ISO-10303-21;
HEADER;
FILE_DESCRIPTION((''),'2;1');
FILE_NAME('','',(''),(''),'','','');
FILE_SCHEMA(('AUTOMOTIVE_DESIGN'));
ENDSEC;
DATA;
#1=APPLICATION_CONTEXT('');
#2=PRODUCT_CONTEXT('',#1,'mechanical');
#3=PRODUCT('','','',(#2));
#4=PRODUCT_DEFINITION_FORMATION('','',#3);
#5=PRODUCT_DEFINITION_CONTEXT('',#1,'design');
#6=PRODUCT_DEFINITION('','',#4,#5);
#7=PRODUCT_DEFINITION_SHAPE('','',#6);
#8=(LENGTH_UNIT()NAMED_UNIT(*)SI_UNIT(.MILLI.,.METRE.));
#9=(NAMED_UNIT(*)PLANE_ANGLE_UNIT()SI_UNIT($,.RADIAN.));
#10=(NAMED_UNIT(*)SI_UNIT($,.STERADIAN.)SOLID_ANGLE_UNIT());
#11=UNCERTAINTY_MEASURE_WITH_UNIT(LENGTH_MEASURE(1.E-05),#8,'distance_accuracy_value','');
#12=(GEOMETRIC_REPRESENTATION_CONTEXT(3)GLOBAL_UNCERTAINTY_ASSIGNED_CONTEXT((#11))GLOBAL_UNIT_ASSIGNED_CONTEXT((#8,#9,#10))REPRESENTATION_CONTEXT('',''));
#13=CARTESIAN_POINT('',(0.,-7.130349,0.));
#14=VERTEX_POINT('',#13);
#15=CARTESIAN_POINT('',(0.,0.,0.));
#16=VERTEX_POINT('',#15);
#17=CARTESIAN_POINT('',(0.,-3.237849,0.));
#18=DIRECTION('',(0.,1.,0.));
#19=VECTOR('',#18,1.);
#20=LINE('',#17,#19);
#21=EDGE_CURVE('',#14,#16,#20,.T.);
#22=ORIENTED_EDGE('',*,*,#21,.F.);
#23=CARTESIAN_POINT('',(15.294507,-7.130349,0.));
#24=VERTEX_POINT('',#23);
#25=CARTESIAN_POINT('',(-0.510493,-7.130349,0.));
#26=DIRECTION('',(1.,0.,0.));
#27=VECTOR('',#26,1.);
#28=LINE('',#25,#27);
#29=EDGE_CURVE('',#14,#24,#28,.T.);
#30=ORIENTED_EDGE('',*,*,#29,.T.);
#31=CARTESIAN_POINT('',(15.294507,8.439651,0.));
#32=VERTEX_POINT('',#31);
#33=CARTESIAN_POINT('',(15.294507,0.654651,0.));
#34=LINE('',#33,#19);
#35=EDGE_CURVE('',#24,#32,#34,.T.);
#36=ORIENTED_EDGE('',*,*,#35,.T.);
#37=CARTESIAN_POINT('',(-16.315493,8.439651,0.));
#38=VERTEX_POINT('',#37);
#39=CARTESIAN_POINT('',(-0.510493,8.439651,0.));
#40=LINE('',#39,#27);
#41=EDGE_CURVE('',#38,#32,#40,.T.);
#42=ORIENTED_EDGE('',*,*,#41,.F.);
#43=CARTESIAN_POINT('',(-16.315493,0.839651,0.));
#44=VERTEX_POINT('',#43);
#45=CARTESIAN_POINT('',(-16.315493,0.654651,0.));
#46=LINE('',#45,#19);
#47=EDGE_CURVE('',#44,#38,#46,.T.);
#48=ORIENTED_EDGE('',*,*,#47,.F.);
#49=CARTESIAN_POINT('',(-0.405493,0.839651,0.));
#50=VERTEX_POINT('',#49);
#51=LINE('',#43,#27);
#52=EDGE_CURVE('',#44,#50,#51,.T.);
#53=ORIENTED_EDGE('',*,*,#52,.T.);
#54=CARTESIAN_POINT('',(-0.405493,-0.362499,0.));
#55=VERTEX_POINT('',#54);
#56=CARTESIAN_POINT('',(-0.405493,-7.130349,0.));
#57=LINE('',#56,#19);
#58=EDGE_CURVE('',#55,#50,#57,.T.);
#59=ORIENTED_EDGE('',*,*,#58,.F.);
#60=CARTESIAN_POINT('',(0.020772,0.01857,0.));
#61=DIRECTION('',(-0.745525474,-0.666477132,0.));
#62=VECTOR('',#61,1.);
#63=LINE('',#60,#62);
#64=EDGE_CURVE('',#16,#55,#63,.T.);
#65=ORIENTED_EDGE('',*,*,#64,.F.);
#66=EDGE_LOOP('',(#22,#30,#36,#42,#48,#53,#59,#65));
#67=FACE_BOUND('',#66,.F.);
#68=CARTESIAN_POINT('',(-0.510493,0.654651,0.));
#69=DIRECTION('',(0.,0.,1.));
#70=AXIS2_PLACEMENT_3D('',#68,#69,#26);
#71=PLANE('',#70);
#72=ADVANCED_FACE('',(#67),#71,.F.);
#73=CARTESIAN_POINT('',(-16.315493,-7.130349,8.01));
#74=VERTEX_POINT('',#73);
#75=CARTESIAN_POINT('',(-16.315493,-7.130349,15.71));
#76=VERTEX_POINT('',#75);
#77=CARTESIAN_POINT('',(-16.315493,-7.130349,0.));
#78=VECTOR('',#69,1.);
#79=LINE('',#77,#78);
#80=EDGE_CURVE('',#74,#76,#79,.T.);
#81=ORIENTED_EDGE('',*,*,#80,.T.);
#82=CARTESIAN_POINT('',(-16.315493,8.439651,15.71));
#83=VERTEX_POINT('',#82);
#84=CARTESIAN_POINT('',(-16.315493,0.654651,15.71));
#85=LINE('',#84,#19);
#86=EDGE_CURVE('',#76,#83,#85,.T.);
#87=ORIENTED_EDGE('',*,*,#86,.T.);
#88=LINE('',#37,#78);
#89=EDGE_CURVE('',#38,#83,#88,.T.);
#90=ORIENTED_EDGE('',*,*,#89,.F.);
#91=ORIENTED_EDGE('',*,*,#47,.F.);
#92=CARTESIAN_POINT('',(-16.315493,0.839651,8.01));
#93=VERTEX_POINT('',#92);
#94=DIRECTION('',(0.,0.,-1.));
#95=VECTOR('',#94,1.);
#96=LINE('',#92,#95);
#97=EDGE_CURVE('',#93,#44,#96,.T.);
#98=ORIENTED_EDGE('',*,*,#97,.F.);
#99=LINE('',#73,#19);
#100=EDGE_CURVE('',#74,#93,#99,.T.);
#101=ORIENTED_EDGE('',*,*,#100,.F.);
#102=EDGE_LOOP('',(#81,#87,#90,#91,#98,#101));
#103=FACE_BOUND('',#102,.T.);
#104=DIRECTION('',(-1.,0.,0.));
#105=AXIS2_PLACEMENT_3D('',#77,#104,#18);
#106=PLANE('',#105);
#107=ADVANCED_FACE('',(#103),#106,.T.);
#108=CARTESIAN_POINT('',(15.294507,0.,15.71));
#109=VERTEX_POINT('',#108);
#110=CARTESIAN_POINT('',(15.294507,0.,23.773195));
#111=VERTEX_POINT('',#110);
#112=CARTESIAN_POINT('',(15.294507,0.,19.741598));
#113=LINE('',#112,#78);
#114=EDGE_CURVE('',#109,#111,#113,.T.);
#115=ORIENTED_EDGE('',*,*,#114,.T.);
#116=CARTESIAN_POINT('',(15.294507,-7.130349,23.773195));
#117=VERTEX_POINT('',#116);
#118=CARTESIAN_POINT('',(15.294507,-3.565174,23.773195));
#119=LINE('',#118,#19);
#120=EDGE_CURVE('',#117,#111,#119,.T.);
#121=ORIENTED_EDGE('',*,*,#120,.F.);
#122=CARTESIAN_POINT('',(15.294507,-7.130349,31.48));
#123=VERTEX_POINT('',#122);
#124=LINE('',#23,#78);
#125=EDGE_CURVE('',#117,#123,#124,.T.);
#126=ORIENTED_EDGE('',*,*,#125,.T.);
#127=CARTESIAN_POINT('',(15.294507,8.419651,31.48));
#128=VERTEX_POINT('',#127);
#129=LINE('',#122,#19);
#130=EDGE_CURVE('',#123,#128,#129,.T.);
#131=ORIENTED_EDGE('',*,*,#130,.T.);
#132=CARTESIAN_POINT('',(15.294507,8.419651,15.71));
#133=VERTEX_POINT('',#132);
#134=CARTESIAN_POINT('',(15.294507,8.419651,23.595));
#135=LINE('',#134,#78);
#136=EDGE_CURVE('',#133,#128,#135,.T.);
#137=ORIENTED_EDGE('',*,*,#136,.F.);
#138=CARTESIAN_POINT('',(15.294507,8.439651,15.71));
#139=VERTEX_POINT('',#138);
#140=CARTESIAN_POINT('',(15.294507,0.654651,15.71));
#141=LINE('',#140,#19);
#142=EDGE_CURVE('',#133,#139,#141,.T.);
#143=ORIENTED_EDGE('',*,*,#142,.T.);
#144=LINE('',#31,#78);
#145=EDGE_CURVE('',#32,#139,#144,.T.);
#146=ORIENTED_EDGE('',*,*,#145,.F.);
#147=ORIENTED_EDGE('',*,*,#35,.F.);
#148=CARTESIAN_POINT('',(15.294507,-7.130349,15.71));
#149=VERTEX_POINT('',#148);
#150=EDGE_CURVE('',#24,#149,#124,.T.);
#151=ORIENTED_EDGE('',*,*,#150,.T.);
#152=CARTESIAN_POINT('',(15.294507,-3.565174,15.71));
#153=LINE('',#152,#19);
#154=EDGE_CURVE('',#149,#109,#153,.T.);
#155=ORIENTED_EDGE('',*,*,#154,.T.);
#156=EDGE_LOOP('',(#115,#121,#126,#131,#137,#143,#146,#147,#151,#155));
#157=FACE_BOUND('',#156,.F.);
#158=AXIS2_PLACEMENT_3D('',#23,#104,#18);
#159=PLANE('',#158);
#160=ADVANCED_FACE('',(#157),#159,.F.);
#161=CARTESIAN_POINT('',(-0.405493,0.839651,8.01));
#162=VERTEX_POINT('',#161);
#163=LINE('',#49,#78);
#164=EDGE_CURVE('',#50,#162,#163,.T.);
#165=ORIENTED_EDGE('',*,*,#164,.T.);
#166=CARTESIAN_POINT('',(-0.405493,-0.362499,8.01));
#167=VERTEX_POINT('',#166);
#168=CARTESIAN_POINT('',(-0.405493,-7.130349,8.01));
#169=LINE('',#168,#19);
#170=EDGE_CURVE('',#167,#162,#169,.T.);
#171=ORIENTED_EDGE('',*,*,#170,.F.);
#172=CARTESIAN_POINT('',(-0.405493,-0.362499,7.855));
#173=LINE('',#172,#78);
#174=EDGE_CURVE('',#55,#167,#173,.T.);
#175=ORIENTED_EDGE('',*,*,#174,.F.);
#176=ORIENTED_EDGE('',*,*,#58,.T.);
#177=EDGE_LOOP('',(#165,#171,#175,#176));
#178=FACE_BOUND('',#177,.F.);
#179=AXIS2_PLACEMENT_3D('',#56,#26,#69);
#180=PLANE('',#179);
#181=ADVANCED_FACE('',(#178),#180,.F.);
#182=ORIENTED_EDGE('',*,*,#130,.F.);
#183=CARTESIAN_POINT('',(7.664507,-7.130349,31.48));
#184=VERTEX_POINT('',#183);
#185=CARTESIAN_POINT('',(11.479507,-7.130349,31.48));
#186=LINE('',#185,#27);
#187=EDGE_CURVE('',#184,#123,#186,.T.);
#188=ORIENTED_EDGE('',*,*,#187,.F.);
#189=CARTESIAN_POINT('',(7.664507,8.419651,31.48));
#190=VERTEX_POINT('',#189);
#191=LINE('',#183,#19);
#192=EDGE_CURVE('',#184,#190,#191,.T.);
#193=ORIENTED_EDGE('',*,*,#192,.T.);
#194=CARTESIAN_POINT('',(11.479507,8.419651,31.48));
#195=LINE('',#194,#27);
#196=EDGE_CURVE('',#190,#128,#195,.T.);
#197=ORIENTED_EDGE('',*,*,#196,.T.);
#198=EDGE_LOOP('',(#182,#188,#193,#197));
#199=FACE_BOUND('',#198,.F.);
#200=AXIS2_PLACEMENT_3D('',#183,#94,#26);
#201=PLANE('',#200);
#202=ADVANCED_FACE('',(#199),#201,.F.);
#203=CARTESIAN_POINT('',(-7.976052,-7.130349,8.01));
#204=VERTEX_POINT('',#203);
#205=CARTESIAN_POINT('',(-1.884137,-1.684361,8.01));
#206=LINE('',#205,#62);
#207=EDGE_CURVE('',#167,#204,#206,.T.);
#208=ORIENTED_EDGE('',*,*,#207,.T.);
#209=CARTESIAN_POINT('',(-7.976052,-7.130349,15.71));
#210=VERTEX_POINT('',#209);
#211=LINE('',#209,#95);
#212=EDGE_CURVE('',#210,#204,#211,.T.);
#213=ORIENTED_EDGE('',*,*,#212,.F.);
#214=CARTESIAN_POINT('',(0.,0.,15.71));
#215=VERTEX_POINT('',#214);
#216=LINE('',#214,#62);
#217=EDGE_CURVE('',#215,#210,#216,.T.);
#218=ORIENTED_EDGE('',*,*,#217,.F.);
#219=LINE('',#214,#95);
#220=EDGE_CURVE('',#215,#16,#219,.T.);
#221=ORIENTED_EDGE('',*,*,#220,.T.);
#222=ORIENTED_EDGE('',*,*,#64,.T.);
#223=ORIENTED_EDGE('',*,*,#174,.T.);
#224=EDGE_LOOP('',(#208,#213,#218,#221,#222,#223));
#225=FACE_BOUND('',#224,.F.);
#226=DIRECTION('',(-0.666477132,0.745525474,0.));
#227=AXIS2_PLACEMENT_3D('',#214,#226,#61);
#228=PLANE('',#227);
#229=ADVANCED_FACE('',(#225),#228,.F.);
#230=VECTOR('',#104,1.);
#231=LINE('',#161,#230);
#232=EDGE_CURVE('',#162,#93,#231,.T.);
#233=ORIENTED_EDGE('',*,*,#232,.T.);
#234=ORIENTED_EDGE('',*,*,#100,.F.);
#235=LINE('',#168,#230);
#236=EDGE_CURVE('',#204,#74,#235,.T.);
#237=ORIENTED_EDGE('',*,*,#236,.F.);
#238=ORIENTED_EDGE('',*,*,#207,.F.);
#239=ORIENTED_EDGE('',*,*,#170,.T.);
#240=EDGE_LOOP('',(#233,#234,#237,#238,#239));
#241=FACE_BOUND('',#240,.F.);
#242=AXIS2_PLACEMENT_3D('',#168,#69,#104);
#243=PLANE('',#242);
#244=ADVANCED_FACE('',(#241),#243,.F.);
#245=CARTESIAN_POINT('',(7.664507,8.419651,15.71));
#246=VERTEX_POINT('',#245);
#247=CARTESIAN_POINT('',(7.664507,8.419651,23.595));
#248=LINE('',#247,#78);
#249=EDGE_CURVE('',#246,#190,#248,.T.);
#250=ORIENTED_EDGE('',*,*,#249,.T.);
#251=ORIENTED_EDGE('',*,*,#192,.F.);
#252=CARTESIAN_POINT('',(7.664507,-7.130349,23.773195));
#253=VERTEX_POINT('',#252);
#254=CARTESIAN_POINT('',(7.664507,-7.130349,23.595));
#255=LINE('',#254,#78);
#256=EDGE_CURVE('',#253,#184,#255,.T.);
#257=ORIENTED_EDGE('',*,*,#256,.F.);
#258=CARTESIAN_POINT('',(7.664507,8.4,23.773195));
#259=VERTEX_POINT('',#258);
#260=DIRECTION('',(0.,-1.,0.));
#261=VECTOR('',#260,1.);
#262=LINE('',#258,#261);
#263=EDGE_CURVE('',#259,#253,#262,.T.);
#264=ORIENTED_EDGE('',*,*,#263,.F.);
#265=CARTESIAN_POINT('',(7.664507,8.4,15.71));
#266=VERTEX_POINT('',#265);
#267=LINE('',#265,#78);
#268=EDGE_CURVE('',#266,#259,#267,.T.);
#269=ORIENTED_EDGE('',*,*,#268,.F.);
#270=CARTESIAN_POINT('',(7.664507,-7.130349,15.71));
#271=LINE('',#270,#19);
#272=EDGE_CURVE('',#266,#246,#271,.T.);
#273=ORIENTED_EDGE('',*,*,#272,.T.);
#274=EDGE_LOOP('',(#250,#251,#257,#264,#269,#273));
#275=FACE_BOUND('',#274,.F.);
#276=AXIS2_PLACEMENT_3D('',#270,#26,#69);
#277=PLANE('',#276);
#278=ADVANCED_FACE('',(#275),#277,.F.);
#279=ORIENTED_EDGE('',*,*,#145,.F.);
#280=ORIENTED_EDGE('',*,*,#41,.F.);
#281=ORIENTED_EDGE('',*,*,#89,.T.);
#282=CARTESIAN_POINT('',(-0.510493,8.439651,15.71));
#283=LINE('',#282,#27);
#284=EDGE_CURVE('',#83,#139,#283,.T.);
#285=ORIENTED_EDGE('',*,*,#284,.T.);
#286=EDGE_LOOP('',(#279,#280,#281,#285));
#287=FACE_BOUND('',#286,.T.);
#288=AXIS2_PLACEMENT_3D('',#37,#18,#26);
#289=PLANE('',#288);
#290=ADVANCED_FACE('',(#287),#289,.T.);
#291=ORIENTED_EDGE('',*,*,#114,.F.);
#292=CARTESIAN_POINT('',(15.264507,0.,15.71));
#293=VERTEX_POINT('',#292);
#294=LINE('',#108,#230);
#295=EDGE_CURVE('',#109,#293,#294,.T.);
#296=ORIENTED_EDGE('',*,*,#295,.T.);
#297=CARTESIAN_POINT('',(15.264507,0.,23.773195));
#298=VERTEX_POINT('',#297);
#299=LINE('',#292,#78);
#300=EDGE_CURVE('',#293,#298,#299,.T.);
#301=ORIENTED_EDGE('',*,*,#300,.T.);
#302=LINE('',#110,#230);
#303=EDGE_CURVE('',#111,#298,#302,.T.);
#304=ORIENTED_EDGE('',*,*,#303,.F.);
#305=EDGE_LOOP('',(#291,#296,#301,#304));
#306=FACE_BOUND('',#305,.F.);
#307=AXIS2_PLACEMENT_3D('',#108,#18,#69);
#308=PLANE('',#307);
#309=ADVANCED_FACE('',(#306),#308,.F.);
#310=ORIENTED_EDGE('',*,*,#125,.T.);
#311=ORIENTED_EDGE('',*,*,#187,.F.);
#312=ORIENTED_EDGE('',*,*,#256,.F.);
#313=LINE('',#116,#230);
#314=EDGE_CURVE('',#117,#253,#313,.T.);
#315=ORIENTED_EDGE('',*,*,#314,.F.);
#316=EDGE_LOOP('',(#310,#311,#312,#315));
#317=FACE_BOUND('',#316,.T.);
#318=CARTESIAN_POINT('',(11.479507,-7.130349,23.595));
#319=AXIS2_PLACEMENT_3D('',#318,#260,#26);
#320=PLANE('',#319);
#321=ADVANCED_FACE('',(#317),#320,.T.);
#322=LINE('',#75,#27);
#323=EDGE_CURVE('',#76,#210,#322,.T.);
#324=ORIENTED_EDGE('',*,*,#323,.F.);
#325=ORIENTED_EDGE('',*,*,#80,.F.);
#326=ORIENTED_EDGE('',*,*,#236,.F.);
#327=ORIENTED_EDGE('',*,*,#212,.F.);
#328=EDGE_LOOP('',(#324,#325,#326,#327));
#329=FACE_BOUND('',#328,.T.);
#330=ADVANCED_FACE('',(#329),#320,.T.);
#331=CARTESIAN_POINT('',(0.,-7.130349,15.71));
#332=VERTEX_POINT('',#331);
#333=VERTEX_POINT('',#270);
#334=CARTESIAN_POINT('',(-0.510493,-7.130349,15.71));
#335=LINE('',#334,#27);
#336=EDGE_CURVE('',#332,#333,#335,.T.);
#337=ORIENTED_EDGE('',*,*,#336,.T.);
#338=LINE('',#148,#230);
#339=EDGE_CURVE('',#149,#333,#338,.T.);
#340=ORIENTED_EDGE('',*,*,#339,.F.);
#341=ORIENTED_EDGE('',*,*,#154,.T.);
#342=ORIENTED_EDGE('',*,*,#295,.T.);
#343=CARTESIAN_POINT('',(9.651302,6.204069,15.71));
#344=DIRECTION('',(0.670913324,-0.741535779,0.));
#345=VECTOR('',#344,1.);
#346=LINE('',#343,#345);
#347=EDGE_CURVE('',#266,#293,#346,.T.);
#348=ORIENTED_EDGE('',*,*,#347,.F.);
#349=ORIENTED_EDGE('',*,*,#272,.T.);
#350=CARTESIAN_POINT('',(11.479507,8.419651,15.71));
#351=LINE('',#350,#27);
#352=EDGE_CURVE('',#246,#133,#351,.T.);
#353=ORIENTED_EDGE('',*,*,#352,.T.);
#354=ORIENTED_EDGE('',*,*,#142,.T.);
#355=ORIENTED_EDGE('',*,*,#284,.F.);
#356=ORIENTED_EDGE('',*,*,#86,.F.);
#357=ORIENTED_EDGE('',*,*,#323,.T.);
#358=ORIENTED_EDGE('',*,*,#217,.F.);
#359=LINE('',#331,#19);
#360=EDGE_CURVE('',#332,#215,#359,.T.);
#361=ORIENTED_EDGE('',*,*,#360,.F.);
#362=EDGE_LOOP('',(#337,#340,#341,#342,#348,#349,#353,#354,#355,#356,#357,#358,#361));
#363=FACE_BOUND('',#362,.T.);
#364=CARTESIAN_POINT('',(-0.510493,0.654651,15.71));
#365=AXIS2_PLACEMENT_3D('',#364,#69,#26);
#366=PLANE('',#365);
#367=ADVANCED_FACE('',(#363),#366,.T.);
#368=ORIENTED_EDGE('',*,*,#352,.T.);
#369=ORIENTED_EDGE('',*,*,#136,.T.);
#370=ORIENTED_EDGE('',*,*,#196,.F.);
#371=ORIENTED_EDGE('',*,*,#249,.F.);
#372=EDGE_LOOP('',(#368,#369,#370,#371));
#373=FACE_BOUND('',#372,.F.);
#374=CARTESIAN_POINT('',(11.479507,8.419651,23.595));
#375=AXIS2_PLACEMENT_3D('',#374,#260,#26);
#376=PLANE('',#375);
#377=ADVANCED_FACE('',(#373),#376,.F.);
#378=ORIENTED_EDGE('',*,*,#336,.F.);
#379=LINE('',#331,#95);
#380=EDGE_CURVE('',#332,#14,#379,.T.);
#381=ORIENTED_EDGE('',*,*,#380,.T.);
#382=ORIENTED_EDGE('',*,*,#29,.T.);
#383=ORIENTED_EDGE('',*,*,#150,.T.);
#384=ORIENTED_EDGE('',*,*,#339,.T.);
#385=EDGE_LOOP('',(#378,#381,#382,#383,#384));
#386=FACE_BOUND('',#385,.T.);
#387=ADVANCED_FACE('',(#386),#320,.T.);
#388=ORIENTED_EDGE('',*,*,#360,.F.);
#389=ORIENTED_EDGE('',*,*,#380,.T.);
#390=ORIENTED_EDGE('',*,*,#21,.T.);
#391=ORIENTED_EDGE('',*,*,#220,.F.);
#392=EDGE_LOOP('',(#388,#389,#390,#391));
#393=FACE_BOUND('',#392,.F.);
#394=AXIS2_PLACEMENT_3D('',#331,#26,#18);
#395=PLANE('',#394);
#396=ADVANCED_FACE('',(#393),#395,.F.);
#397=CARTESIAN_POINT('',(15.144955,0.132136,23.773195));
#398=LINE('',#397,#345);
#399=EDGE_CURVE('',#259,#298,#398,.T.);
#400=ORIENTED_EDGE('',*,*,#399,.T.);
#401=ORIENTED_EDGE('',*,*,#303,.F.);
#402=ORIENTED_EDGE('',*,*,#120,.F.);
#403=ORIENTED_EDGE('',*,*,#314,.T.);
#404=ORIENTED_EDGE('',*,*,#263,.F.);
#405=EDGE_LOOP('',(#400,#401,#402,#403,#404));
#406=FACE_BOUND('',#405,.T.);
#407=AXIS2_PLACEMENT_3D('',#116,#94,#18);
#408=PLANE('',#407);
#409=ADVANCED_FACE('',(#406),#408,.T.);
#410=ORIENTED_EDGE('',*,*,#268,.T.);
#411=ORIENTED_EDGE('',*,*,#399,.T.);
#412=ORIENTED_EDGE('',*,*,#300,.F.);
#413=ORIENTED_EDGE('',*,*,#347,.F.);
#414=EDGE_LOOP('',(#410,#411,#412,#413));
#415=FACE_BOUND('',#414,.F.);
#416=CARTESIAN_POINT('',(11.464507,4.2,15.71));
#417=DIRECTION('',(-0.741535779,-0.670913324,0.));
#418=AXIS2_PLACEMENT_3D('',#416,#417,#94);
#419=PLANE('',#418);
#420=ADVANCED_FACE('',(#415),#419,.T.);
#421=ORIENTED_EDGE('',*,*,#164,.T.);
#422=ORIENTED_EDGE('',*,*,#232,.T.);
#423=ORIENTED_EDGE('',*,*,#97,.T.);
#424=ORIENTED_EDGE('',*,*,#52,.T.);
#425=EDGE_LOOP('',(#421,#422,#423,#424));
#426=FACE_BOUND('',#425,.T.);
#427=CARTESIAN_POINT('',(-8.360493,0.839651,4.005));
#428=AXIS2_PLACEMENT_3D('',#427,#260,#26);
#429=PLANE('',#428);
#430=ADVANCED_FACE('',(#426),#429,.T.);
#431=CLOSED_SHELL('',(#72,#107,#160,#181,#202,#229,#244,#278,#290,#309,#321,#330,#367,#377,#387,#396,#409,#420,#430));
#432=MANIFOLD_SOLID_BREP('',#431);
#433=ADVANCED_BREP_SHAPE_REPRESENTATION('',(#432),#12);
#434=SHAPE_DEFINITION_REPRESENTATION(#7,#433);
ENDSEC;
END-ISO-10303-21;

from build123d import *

# Parameters (mm, degrees)
F0_W      = 31.61
F0_H      = 15.57
F1_DEPTH  = 15.71
F2_W      = 7.63
F2_H      = 15.77
F3_DEPTH  = 15.55
F5_DEPTH  = 7.97
F7_DEPTH  = 25
F8_W      = 7.1303485631
F8_H      = 8.063195222
F9_DEPTH  = 25
F10_SIZE2 = 7.6
F10_SIZE  = 8.4


with BuildPart() as f1:
    # F0 (on Top) → F1 (new body)
    with BuildSketch(Plane.XY):
        with Locations((-0.5104932934, 0.6546514369)):
            Rectangle(F0_W, F0_H)
    extrude(amount=F1_DEPTH)

    # F2 (on face) → F3 (join)
    with BuildSketch(Plane.XZ.offset(7.1303485631)):
        with Locations((11.4795067066, 23.595)):
            Rectangle(F2_W, F2_H)
    extrude(amount=-F3_DEPTH)

    # F4 (on face) → F5 (cut)
    with BuildSketch(Plane.XZ.offset(7.1303485631)):
        Polygon((-0.4054932934, 0), (-0.4054932934, 8.01), (-8.0654932934, 8.01), (-16.3154932934, 8.01), (-16.3154932934, 0), align=None)
    extrude(amount=-F5_DEPTH, mode=Mode.SUBTRACT)

    # F6 (on face) → F7 (cut)
    with BuildSketch(Plane.XY.offset(15.71)):
        Polygon((0, 0), (-7.9760523513, -7.1303485631), (0, -7.1303485631), align=None)
    extrude(amount=-F7_DEPTH, mode=Mode.SUBTRACT)

    # F8 (on face) → F9 (cut)
    with BuildSketch(Plane.YZ.offset(15.2945067066)):
        with Locations((-3.5651742816, 19.741597611)):
            Rectangle(F8_W, F8_H)
    extrude(amount=-F9_DEPTH, mode=Mode.SUBTRACT)

    # F10
    f10_edges = [f1.edges().sort_by_distance(p)[0] for p in [
        (7.664507, 0, 19.741598),
    ]]
    f10_side = f1.faces().sort_by_distance((7.664507, 1.933934, 24.775126))[0]
    chamfer(f10_edges, length=F10_SIZE, length2=F10_SIZE2, reference=f10_side)


solid = f1.part
